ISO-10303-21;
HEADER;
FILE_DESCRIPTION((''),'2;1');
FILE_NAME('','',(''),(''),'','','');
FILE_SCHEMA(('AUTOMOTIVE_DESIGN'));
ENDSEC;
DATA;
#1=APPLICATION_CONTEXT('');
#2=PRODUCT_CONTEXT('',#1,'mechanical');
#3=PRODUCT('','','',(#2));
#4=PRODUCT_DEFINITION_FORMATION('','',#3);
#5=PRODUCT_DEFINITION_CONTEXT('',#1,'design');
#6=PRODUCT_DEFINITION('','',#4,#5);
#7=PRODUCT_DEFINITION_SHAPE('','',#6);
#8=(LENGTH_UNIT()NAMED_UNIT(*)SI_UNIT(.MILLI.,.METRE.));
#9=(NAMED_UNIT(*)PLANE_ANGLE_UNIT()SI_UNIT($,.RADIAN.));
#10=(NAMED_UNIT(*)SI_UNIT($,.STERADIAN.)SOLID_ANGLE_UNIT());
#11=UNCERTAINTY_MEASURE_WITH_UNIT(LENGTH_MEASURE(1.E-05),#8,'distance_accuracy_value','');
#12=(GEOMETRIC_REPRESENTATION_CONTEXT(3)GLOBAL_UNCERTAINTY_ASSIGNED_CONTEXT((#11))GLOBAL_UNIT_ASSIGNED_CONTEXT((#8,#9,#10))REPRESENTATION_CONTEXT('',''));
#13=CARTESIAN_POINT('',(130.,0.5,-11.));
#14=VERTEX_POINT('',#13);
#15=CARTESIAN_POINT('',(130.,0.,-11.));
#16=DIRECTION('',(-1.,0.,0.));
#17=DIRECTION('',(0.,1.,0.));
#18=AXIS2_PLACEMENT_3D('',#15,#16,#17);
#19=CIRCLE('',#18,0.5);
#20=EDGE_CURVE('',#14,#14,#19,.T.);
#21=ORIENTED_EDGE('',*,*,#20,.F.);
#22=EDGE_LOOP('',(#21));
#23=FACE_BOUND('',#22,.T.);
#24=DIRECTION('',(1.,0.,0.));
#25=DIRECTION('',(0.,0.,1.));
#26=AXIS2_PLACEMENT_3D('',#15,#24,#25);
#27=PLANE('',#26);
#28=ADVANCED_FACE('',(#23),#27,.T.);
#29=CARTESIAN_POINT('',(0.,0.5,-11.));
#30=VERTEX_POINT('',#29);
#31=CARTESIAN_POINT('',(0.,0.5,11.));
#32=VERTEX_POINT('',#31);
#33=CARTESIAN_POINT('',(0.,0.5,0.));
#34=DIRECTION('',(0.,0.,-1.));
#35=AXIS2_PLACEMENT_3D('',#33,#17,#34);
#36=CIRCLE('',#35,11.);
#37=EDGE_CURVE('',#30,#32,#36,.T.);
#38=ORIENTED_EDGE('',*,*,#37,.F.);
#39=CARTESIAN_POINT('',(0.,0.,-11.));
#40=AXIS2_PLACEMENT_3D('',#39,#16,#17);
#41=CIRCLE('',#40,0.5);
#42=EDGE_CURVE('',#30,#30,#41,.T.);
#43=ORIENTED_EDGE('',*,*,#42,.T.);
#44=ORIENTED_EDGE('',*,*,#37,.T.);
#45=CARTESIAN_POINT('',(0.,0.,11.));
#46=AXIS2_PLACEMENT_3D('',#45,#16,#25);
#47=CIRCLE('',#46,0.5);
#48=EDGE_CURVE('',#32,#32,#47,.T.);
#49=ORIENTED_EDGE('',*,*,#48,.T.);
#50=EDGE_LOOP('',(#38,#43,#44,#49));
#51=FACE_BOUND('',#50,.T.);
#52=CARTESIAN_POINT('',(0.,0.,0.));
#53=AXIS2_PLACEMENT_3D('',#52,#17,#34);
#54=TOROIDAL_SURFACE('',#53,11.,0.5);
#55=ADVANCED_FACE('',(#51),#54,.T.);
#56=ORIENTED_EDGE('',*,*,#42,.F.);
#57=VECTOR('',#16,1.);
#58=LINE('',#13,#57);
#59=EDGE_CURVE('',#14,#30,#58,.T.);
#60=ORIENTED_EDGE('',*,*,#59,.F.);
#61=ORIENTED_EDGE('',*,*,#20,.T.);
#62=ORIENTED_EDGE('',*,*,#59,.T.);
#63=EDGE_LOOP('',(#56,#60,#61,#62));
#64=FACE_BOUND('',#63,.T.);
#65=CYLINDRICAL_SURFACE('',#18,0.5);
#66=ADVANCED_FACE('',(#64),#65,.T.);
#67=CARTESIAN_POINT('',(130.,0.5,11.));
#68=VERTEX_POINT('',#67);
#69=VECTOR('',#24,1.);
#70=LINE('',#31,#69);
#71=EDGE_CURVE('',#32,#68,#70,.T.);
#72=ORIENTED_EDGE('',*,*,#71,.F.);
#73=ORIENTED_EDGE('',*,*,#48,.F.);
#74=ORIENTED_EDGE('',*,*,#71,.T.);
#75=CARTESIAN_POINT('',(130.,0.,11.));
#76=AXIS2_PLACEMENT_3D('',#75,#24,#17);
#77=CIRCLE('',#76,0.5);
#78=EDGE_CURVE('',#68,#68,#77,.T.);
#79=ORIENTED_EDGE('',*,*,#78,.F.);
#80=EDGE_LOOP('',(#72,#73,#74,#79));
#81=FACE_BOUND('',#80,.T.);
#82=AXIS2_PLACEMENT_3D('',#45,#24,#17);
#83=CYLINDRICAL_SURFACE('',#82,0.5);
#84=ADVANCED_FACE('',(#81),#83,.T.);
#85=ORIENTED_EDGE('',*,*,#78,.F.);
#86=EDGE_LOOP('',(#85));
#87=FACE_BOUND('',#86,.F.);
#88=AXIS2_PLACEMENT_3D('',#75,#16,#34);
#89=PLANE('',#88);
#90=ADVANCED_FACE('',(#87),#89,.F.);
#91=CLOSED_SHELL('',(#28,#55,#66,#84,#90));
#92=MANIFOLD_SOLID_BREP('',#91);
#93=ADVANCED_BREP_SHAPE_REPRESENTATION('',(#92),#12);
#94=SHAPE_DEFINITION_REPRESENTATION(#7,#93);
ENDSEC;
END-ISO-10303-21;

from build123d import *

# Parameters (mm, degrees)
F2_R = 0.5


# Not quite as in the source:
# - a feature of the source that left no trace in its solid (it failed there, or was rolled back) is left out


with BuildPart() as f3:
    # F3: sweep along a path in F1
    with BuildLine(Plane.XZ) as f3_path:
        Line((130, -11), (0, -11))
        ThreePointArc((0, -11), (-11, 0), (0, 11))
        Line((0, 11), (130, 11))
    # F2 (on Right) → F3 (sweep)
    with BuildSketch(Plane.YZ):
        with Locations((0, -11)):
            Circle(F2_R)
    sweep(path=f3_path.line)


solid = f3.part
